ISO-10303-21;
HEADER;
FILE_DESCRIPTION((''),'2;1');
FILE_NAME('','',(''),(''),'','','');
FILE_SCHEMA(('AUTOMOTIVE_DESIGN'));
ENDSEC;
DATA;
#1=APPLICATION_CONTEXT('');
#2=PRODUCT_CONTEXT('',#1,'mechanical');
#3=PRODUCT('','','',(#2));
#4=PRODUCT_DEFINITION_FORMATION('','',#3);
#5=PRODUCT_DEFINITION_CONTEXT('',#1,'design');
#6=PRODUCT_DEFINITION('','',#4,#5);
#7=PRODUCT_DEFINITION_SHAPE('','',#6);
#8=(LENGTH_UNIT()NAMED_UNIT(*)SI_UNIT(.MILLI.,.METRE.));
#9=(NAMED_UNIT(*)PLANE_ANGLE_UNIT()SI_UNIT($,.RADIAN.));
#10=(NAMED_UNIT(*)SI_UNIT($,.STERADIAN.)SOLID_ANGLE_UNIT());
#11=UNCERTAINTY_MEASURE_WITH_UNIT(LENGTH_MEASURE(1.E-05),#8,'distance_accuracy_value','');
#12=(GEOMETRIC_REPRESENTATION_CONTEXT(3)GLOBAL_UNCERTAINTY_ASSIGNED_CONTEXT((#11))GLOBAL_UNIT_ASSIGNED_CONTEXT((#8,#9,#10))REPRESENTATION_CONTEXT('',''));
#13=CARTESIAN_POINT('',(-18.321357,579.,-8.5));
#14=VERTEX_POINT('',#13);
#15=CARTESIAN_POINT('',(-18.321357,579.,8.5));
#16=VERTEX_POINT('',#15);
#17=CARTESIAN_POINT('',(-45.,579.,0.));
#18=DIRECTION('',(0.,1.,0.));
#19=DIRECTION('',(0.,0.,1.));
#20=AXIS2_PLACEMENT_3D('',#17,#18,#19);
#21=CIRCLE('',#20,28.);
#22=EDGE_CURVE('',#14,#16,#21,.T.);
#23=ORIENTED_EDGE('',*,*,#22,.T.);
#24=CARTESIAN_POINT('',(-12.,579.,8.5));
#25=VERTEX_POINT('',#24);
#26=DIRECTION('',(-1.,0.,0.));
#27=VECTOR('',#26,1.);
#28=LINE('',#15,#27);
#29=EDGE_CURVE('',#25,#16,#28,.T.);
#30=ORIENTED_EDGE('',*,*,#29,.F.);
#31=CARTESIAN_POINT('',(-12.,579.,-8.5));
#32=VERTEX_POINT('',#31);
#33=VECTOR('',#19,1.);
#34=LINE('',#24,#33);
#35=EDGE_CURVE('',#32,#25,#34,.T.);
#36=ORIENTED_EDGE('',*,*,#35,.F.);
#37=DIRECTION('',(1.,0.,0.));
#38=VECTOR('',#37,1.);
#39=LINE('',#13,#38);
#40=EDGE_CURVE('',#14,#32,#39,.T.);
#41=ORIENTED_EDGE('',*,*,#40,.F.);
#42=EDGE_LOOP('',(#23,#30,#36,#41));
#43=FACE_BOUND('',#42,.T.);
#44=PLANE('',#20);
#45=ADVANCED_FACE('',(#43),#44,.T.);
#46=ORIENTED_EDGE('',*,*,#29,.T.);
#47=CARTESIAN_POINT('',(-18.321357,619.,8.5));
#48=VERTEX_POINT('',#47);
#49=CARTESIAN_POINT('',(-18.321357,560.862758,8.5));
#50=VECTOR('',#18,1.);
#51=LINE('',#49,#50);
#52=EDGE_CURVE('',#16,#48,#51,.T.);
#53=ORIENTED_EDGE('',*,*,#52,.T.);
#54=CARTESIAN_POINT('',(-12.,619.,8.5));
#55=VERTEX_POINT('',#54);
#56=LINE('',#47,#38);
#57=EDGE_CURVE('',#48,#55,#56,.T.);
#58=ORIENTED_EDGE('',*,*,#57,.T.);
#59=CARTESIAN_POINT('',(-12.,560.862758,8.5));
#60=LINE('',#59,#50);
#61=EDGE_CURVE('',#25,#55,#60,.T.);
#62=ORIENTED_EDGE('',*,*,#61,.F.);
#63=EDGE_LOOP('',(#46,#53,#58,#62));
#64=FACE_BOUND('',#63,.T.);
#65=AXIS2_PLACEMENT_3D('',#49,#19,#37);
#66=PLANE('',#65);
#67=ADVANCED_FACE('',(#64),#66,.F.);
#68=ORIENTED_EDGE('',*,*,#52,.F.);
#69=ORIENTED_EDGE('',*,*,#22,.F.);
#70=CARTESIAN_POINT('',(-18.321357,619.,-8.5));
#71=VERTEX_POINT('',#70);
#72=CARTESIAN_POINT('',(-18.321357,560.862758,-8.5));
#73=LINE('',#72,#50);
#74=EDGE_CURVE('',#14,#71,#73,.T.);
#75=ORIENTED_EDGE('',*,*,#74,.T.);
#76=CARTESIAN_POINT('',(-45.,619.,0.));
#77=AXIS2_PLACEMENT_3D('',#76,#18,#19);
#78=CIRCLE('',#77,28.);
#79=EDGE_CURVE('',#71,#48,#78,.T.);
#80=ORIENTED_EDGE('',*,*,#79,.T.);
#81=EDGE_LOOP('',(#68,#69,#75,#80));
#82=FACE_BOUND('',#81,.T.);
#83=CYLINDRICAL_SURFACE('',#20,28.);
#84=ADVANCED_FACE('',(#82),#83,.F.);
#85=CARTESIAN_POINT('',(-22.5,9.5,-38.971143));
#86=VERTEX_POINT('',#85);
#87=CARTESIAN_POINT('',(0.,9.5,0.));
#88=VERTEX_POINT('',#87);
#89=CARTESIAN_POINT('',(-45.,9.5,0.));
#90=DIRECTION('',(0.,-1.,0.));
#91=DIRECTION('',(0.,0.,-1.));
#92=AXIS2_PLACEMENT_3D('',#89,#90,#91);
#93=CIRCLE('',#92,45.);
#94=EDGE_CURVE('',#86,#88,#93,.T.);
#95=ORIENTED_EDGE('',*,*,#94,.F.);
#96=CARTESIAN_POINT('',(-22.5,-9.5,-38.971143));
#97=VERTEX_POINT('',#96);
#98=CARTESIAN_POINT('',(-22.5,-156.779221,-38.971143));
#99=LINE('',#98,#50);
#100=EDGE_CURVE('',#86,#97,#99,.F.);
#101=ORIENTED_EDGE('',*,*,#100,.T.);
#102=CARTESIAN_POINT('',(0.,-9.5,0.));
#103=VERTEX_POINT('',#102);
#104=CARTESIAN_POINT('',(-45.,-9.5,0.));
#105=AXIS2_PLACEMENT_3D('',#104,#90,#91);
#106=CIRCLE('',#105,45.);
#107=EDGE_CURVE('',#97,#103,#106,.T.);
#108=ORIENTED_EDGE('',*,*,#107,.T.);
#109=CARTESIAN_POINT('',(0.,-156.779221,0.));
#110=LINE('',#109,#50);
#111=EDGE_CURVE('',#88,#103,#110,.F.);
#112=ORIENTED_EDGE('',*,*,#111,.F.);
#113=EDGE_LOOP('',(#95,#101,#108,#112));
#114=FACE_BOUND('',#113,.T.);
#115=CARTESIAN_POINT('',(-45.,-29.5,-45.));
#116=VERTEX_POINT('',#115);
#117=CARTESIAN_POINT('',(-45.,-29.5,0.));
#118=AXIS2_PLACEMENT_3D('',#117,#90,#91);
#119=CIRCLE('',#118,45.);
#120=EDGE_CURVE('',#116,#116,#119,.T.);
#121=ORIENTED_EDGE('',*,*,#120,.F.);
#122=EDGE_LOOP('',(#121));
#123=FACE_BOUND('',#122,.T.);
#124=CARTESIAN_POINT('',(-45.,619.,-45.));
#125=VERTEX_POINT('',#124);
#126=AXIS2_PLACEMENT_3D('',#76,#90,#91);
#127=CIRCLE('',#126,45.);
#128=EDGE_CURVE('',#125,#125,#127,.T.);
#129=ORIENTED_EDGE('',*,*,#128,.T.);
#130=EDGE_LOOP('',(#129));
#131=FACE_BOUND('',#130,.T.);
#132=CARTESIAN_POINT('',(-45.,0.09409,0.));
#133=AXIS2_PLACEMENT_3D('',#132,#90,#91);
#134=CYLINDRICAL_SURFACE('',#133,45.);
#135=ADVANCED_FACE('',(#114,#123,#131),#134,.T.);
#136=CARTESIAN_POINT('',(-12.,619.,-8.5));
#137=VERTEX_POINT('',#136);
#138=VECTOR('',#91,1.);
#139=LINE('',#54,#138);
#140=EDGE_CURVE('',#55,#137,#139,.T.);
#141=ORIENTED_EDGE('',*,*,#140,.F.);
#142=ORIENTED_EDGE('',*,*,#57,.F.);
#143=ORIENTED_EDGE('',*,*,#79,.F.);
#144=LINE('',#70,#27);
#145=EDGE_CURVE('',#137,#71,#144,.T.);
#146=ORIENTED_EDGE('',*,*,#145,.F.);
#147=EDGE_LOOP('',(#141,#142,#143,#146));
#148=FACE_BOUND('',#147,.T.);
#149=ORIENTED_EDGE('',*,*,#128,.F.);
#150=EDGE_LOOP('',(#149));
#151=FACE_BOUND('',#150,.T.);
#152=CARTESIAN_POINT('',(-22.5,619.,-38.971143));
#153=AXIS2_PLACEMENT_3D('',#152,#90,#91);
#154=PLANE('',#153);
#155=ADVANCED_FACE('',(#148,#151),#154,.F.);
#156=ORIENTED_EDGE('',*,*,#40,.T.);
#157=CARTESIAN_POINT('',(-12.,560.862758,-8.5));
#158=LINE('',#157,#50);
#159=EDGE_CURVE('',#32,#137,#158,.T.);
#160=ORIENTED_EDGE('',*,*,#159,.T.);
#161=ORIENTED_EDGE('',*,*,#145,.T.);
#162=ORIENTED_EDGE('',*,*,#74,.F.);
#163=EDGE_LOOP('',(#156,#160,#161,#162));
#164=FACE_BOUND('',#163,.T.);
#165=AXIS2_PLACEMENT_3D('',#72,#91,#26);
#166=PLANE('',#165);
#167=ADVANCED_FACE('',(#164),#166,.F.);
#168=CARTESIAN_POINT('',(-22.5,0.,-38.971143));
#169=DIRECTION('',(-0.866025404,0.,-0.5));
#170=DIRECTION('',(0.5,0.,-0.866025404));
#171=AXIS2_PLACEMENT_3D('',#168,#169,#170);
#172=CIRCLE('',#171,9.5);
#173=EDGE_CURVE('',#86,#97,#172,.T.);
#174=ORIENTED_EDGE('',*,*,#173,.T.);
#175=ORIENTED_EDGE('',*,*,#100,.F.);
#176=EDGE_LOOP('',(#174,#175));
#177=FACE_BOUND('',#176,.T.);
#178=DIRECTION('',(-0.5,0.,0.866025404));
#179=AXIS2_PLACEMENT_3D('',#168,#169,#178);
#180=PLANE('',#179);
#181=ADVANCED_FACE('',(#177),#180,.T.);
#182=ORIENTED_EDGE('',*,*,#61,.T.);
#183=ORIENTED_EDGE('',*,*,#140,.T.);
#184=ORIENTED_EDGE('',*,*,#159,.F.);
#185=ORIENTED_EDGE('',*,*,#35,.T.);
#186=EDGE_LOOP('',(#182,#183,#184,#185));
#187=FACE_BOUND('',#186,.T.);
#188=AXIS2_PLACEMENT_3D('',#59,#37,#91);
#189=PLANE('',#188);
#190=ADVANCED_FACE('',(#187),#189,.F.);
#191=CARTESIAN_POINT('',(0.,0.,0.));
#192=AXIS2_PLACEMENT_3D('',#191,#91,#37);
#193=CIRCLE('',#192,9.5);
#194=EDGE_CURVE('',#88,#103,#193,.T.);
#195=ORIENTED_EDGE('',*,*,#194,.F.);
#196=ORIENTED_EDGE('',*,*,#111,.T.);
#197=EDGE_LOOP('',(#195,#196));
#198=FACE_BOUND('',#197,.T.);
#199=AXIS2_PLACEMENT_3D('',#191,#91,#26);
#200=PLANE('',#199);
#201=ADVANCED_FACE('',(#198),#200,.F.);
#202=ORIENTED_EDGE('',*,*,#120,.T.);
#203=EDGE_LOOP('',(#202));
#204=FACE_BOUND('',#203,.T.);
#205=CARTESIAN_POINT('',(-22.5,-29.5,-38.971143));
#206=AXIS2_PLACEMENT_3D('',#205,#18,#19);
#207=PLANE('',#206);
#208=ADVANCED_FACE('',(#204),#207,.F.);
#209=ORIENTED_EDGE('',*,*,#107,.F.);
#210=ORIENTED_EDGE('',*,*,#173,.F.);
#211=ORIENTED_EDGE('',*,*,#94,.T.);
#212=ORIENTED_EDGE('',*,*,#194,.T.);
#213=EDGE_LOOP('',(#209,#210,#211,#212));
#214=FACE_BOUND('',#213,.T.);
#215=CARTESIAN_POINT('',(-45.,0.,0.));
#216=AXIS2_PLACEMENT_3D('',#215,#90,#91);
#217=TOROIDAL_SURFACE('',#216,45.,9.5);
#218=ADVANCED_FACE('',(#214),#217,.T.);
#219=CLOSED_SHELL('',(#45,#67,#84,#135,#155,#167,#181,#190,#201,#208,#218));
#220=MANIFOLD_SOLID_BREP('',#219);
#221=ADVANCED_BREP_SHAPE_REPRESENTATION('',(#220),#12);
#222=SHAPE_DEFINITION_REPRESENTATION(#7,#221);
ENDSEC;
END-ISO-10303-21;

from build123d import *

# Parameters (mm, degrees)
REVOLVE_THIN1_ANGLE = 60
SKETCH3_R           = 45
BOSS_EXTRUDE2_DEPTH = 648.5
SKETCH4_R           = 28
CUT_EXTRUDE1_DEPTH  = 40
CUT_EXTRUDE2_DEPTH  = 40


# Read off the part's stored shape, not the designer's step: Revolve-Thin1
with BuildPart() as part:
    # Revolve-Thin1 outline → Revolve-Thin1 (revolve)
    with BuildSketch(Plane(origin=(-45, 0, 0), x_dir=(1, 0, 0), z_dir=(0, 0, 1))):
        with BuildLine():
            Line((35, -19.5), (0, -19.5))
            Line((0, -19.5), (0, -29.5))
            Line((0, -29.5), (45, -29.5))
            Line((45, -29.5), (45, -9.5))
            ThreePointArc((45, -9.5), (54.5, 0), (45, 9.5))
            Line((45, 9.5), (45, 619))
            Line((45, 619), (0, 619))
            Line((0, 619), (0, 609))
            Line((0, 609), (35, 609))
            Line((35, 609), (35, -19.5))
        make_face()
    revolve(axis=Axis((-45, 0, 0), (0, 1, 0)), revolution_arc=REVOLVE_THIN1_ANGLE)

    # Sketch3 → Boss-Extrude2 (add)
    with BuildSketch(Plane(origin=(0, 619, 0), x_dir=(1, 0, 0), z_dir=(0, 1, 0))):
        with Locations(Location((-45, 0, 0), (0, 0, 90))):
            Circle(SKETCH3_R)
    extrude(amount=-BOSS_EXTRUDE2_DEPTH)

    # Sketch4 → Cut-Extrude1 (cut)
    with BuildSketch(Plane(origin=(0, 619, 0), x_dir=(1, 0, 0), z_dir=(0, 1, 0))):
        with Locations(Location((-45, 0, 0), (0, 0, 270))):
            Circle(SKETCH4_R)
    extrude(amount=-CUT_EXTRUDE1_DEPTH, mode=Mode.SUBTRACT)

    # Sketch5 → Cut-Extrude2 (cut)
    with BuildSketch(Plane(origin=(0, 619, 0), x_dir=(1, 0, 0), z_dir=(0, 1, 0))):
        with BuildLine():
            Line((-18.321356856, 8.5), (-12, 8.5))
            Line((-12, 8.5), (-12, -8.5))
            Line((-12, -8.5), (-18.321356856, -8.5))
            ThreePointArc((-18.321356856, -8.5), (-17, 0), (-18.321356856, 8.5))
        make_face()
    extrude(amount=-CUT_EXTRUDE2_DEPTH, mode=Mode.SUBTRACT)


solid = part.part
